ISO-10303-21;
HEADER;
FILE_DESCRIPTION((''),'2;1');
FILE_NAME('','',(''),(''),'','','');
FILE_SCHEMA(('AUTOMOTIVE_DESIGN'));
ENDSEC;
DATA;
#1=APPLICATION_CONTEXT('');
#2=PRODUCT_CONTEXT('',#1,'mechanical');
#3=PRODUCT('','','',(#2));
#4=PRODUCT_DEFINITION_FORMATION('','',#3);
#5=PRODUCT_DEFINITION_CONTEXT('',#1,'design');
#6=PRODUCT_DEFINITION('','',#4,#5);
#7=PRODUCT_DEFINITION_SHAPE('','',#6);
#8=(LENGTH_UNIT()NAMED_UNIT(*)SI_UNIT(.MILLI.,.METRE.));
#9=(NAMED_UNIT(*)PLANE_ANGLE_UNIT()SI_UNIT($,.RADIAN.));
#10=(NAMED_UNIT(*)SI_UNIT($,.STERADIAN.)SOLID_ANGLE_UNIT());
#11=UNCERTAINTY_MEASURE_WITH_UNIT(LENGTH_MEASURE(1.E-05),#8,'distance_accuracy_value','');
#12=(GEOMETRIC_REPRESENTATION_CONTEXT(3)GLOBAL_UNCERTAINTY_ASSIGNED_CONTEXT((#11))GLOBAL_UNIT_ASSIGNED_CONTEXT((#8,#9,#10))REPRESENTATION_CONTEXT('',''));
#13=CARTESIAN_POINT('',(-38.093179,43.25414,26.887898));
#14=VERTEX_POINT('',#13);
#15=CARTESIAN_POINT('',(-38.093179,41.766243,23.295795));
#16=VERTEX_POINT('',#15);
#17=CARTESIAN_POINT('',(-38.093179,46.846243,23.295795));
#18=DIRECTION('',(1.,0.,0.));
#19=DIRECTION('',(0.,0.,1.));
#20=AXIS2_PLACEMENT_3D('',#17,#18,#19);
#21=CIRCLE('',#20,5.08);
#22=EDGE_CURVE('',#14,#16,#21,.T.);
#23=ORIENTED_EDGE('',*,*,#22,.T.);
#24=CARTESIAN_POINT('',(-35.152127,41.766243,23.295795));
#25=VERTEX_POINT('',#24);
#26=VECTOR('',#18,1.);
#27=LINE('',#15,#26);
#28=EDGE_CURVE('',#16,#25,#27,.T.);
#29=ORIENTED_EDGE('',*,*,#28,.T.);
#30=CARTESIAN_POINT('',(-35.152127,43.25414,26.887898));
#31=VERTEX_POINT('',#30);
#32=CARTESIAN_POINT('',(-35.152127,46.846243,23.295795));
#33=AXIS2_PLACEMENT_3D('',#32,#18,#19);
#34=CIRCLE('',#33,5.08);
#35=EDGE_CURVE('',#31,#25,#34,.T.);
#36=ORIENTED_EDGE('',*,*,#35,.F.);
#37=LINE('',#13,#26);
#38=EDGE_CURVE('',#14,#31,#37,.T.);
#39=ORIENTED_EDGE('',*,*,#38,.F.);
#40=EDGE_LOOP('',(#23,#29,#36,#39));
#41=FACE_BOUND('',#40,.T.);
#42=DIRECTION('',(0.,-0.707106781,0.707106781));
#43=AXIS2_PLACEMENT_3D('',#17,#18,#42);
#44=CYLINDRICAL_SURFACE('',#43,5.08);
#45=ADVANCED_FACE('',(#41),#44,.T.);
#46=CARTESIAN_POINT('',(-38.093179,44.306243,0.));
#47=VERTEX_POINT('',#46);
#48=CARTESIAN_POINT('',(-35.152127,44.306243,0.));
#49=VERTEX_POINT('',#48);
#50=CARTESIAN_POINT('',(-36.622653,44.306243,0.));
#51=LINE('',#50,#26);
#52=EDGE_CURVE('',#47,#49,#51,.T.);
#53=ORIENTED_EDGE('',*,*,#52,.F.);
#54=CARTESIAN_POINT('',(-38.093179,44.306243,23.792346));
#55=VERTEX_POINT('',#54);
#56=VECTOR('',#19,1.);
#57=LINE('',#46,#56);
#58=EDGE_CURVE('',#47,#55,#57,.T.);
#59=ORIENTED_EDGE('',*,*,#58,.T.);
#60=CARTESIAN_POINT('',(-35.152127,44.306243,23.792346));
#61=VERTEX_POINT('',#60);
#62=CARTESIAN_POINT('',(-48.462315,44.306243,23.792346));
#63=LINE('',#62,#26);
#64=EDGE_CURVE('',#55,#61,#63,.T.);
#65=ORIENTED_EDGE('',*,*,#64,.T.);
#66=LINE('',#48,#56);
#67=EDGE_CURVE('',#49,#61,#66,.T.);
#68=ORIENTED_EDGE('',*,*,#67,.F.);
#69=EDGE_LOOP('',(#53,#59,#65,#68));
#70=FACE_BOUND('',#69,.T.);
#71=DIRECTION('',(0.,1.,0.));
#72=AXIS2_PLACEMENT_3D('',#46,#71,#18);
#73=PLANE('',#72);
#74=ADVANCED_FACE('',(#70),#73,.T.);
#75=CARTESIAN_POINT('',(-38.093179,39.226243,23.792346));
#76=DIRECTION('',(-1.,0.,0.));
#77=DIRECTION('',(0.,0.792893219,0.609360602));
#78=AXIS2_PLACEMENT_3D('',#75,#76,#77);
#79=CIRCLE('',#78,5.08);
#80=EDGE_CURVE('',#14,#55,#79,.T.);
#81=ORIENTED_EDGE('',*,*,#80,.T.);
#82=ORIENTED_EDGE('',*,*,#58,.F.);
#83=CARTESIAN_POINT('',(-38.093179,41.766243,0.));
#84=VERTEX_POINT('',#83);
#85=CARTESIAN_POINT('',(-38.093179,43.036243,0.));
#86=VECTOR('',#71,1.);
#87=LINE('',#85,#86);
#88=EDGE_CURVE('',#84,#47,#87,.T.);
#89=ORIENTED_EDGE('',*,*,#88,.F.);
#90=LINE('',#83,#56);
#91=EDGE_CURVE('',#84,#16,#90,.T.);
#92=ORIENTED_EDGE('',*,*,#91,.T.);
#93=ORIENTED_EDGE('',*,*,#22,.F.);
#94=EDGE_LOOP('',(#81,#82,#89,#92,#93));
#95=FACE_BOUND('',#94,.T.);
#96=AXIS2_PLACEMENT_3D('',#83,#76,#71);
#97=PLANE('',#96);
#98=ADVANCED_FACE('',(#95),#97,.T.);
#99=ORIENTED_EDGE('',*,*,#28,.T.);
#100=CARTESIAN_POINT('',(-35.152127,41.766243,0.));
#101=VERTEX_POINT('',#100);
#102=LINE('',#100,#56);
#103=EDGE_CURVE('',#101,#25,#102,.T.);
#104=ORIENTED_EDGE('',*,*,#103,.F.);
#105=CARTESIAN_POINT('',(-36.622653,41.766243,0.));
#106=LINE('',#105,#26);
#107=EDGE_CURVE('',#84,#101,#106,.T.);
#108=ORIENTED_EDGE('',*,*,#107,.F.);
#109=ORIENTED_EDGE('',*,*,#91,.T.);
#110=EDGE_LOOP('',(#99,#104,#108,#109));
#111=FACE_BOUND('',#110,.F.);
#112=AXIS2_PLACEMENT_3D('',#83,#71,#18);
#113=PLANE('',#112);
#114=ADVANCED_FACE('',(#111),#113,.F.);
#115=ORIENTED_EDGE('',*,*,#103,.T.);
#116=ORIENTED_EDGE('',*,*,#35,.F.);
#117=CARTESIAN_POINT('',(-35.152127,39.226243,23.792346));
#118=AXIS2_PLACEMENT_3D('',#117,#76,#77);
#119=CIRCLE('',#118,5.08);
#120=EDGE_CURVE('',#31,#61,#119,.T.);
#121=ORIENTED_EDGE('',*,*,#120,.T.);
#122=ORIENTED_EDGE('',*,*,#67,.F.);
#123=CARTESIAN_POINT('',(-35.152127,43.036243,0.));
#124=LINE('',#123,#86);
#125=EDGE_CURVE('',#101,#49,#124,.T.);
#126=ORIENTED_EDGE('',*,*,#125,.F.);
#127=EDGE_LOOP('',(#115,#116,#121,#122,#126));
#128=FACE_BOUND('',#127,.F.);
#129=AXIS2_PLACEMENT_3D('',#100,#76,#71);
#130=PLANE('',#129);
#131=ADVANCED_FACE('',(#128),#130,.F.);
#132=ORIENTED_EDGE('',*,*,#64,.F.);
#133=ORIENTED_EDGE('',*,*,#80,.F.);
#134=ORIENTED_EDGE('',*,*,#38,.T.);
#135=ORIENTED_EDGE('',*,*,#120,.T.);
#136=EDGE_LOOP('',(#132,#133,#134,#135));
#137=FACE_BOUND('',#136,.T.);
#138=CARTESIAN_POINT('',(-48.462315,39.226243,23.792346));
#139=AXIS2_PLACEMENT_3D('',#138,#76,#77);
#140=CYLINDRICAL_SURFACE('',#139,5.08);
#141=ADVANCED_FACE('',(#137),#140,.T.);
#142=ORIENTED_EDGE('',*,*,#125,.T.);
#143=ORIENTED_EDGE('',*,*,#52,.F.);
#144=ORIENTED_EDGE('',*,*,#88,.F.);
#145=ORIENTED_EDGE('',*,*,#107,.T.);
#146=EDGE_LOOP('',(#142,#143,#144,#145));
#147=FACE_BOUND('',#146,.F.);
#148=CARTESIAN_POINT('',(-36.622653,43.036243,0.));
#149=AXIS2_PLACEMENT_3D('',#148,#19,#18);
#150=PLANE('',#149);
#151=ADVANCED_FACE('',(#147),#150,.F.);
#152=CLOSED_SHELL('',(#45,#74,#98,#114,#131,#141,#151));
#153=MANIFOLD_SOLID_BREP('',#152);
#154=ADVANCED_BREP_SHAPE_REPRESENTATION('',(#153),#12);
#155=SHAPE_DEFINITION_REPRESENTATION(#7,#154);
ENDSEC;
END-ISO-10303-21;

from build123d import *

# Parameters (mm, degrees)
F0_W        = 2.9410525192
F0_H        = 2.54
F1_DEPTH    = 38.1
F2_T1_DEPTH = 68.2618004135
F3_R        = 5.08
F4_T1_DEPTH = 23.6793240582


# Not quite as in the source:
# - a fillet or chamfer that OpenCascade refuses, or shapes differently, is made with other operations: its cross-section is extruded or revolved along the edge and cut away or added


with BuildPart() as f1:
    # F0 (on Top) → F1 (new body)
    with BuildSketch(Plane.XY):
        with Locations((-36.622652784, 43.036242947)):
            Rectangle(F0_W, F0_H)
    extrude(amount=F1_DEPTH)

    # F2: chamfer of 12.7 on 1 edges, made by hand

    # F2_s2 → F2_t1 (cut)
    with BuildSketch(Plane.YZ.offset(-70.7535529908)):
        Polygon((41.766242947, 25.4), (54.466242947, 38.1), (41.766242947, 38.1), align=None)
    extrude(amount=F2_T1_DEPTH, mode=Mode.SUBTRACT)

    # F3
    f3_edges = [f1.edges().sort_by_distance(p)[0] for p in [
        (-36.622653, 41.766243, 25.4),
    ]]
    fillet(f3_edges, radius=F3_R)

    # F4: fillet of radius 5.08 on 1 edges, made by hand

    # F4_s2 → F4_t1 (cut)
    with BuildSketch(Plane.YZ.offset(-48.4623148131)):
        with BuildLine():
            ThreePointArc((43.2541404986, 26.8878975516), (44.0360308613, 25.4270750946), (44.306242947, 23.7923456922))
            Line((44.306242947, 23.7923456922), (44.306242947, 27.94))
            Line((44.306242947, 27.94), (43.2541404986, 26.8878975516))
        make_face()
    extrude(amount=F4_T1_DEPTH, mode=Mode.SUBTRACT)


solid = f1.part
